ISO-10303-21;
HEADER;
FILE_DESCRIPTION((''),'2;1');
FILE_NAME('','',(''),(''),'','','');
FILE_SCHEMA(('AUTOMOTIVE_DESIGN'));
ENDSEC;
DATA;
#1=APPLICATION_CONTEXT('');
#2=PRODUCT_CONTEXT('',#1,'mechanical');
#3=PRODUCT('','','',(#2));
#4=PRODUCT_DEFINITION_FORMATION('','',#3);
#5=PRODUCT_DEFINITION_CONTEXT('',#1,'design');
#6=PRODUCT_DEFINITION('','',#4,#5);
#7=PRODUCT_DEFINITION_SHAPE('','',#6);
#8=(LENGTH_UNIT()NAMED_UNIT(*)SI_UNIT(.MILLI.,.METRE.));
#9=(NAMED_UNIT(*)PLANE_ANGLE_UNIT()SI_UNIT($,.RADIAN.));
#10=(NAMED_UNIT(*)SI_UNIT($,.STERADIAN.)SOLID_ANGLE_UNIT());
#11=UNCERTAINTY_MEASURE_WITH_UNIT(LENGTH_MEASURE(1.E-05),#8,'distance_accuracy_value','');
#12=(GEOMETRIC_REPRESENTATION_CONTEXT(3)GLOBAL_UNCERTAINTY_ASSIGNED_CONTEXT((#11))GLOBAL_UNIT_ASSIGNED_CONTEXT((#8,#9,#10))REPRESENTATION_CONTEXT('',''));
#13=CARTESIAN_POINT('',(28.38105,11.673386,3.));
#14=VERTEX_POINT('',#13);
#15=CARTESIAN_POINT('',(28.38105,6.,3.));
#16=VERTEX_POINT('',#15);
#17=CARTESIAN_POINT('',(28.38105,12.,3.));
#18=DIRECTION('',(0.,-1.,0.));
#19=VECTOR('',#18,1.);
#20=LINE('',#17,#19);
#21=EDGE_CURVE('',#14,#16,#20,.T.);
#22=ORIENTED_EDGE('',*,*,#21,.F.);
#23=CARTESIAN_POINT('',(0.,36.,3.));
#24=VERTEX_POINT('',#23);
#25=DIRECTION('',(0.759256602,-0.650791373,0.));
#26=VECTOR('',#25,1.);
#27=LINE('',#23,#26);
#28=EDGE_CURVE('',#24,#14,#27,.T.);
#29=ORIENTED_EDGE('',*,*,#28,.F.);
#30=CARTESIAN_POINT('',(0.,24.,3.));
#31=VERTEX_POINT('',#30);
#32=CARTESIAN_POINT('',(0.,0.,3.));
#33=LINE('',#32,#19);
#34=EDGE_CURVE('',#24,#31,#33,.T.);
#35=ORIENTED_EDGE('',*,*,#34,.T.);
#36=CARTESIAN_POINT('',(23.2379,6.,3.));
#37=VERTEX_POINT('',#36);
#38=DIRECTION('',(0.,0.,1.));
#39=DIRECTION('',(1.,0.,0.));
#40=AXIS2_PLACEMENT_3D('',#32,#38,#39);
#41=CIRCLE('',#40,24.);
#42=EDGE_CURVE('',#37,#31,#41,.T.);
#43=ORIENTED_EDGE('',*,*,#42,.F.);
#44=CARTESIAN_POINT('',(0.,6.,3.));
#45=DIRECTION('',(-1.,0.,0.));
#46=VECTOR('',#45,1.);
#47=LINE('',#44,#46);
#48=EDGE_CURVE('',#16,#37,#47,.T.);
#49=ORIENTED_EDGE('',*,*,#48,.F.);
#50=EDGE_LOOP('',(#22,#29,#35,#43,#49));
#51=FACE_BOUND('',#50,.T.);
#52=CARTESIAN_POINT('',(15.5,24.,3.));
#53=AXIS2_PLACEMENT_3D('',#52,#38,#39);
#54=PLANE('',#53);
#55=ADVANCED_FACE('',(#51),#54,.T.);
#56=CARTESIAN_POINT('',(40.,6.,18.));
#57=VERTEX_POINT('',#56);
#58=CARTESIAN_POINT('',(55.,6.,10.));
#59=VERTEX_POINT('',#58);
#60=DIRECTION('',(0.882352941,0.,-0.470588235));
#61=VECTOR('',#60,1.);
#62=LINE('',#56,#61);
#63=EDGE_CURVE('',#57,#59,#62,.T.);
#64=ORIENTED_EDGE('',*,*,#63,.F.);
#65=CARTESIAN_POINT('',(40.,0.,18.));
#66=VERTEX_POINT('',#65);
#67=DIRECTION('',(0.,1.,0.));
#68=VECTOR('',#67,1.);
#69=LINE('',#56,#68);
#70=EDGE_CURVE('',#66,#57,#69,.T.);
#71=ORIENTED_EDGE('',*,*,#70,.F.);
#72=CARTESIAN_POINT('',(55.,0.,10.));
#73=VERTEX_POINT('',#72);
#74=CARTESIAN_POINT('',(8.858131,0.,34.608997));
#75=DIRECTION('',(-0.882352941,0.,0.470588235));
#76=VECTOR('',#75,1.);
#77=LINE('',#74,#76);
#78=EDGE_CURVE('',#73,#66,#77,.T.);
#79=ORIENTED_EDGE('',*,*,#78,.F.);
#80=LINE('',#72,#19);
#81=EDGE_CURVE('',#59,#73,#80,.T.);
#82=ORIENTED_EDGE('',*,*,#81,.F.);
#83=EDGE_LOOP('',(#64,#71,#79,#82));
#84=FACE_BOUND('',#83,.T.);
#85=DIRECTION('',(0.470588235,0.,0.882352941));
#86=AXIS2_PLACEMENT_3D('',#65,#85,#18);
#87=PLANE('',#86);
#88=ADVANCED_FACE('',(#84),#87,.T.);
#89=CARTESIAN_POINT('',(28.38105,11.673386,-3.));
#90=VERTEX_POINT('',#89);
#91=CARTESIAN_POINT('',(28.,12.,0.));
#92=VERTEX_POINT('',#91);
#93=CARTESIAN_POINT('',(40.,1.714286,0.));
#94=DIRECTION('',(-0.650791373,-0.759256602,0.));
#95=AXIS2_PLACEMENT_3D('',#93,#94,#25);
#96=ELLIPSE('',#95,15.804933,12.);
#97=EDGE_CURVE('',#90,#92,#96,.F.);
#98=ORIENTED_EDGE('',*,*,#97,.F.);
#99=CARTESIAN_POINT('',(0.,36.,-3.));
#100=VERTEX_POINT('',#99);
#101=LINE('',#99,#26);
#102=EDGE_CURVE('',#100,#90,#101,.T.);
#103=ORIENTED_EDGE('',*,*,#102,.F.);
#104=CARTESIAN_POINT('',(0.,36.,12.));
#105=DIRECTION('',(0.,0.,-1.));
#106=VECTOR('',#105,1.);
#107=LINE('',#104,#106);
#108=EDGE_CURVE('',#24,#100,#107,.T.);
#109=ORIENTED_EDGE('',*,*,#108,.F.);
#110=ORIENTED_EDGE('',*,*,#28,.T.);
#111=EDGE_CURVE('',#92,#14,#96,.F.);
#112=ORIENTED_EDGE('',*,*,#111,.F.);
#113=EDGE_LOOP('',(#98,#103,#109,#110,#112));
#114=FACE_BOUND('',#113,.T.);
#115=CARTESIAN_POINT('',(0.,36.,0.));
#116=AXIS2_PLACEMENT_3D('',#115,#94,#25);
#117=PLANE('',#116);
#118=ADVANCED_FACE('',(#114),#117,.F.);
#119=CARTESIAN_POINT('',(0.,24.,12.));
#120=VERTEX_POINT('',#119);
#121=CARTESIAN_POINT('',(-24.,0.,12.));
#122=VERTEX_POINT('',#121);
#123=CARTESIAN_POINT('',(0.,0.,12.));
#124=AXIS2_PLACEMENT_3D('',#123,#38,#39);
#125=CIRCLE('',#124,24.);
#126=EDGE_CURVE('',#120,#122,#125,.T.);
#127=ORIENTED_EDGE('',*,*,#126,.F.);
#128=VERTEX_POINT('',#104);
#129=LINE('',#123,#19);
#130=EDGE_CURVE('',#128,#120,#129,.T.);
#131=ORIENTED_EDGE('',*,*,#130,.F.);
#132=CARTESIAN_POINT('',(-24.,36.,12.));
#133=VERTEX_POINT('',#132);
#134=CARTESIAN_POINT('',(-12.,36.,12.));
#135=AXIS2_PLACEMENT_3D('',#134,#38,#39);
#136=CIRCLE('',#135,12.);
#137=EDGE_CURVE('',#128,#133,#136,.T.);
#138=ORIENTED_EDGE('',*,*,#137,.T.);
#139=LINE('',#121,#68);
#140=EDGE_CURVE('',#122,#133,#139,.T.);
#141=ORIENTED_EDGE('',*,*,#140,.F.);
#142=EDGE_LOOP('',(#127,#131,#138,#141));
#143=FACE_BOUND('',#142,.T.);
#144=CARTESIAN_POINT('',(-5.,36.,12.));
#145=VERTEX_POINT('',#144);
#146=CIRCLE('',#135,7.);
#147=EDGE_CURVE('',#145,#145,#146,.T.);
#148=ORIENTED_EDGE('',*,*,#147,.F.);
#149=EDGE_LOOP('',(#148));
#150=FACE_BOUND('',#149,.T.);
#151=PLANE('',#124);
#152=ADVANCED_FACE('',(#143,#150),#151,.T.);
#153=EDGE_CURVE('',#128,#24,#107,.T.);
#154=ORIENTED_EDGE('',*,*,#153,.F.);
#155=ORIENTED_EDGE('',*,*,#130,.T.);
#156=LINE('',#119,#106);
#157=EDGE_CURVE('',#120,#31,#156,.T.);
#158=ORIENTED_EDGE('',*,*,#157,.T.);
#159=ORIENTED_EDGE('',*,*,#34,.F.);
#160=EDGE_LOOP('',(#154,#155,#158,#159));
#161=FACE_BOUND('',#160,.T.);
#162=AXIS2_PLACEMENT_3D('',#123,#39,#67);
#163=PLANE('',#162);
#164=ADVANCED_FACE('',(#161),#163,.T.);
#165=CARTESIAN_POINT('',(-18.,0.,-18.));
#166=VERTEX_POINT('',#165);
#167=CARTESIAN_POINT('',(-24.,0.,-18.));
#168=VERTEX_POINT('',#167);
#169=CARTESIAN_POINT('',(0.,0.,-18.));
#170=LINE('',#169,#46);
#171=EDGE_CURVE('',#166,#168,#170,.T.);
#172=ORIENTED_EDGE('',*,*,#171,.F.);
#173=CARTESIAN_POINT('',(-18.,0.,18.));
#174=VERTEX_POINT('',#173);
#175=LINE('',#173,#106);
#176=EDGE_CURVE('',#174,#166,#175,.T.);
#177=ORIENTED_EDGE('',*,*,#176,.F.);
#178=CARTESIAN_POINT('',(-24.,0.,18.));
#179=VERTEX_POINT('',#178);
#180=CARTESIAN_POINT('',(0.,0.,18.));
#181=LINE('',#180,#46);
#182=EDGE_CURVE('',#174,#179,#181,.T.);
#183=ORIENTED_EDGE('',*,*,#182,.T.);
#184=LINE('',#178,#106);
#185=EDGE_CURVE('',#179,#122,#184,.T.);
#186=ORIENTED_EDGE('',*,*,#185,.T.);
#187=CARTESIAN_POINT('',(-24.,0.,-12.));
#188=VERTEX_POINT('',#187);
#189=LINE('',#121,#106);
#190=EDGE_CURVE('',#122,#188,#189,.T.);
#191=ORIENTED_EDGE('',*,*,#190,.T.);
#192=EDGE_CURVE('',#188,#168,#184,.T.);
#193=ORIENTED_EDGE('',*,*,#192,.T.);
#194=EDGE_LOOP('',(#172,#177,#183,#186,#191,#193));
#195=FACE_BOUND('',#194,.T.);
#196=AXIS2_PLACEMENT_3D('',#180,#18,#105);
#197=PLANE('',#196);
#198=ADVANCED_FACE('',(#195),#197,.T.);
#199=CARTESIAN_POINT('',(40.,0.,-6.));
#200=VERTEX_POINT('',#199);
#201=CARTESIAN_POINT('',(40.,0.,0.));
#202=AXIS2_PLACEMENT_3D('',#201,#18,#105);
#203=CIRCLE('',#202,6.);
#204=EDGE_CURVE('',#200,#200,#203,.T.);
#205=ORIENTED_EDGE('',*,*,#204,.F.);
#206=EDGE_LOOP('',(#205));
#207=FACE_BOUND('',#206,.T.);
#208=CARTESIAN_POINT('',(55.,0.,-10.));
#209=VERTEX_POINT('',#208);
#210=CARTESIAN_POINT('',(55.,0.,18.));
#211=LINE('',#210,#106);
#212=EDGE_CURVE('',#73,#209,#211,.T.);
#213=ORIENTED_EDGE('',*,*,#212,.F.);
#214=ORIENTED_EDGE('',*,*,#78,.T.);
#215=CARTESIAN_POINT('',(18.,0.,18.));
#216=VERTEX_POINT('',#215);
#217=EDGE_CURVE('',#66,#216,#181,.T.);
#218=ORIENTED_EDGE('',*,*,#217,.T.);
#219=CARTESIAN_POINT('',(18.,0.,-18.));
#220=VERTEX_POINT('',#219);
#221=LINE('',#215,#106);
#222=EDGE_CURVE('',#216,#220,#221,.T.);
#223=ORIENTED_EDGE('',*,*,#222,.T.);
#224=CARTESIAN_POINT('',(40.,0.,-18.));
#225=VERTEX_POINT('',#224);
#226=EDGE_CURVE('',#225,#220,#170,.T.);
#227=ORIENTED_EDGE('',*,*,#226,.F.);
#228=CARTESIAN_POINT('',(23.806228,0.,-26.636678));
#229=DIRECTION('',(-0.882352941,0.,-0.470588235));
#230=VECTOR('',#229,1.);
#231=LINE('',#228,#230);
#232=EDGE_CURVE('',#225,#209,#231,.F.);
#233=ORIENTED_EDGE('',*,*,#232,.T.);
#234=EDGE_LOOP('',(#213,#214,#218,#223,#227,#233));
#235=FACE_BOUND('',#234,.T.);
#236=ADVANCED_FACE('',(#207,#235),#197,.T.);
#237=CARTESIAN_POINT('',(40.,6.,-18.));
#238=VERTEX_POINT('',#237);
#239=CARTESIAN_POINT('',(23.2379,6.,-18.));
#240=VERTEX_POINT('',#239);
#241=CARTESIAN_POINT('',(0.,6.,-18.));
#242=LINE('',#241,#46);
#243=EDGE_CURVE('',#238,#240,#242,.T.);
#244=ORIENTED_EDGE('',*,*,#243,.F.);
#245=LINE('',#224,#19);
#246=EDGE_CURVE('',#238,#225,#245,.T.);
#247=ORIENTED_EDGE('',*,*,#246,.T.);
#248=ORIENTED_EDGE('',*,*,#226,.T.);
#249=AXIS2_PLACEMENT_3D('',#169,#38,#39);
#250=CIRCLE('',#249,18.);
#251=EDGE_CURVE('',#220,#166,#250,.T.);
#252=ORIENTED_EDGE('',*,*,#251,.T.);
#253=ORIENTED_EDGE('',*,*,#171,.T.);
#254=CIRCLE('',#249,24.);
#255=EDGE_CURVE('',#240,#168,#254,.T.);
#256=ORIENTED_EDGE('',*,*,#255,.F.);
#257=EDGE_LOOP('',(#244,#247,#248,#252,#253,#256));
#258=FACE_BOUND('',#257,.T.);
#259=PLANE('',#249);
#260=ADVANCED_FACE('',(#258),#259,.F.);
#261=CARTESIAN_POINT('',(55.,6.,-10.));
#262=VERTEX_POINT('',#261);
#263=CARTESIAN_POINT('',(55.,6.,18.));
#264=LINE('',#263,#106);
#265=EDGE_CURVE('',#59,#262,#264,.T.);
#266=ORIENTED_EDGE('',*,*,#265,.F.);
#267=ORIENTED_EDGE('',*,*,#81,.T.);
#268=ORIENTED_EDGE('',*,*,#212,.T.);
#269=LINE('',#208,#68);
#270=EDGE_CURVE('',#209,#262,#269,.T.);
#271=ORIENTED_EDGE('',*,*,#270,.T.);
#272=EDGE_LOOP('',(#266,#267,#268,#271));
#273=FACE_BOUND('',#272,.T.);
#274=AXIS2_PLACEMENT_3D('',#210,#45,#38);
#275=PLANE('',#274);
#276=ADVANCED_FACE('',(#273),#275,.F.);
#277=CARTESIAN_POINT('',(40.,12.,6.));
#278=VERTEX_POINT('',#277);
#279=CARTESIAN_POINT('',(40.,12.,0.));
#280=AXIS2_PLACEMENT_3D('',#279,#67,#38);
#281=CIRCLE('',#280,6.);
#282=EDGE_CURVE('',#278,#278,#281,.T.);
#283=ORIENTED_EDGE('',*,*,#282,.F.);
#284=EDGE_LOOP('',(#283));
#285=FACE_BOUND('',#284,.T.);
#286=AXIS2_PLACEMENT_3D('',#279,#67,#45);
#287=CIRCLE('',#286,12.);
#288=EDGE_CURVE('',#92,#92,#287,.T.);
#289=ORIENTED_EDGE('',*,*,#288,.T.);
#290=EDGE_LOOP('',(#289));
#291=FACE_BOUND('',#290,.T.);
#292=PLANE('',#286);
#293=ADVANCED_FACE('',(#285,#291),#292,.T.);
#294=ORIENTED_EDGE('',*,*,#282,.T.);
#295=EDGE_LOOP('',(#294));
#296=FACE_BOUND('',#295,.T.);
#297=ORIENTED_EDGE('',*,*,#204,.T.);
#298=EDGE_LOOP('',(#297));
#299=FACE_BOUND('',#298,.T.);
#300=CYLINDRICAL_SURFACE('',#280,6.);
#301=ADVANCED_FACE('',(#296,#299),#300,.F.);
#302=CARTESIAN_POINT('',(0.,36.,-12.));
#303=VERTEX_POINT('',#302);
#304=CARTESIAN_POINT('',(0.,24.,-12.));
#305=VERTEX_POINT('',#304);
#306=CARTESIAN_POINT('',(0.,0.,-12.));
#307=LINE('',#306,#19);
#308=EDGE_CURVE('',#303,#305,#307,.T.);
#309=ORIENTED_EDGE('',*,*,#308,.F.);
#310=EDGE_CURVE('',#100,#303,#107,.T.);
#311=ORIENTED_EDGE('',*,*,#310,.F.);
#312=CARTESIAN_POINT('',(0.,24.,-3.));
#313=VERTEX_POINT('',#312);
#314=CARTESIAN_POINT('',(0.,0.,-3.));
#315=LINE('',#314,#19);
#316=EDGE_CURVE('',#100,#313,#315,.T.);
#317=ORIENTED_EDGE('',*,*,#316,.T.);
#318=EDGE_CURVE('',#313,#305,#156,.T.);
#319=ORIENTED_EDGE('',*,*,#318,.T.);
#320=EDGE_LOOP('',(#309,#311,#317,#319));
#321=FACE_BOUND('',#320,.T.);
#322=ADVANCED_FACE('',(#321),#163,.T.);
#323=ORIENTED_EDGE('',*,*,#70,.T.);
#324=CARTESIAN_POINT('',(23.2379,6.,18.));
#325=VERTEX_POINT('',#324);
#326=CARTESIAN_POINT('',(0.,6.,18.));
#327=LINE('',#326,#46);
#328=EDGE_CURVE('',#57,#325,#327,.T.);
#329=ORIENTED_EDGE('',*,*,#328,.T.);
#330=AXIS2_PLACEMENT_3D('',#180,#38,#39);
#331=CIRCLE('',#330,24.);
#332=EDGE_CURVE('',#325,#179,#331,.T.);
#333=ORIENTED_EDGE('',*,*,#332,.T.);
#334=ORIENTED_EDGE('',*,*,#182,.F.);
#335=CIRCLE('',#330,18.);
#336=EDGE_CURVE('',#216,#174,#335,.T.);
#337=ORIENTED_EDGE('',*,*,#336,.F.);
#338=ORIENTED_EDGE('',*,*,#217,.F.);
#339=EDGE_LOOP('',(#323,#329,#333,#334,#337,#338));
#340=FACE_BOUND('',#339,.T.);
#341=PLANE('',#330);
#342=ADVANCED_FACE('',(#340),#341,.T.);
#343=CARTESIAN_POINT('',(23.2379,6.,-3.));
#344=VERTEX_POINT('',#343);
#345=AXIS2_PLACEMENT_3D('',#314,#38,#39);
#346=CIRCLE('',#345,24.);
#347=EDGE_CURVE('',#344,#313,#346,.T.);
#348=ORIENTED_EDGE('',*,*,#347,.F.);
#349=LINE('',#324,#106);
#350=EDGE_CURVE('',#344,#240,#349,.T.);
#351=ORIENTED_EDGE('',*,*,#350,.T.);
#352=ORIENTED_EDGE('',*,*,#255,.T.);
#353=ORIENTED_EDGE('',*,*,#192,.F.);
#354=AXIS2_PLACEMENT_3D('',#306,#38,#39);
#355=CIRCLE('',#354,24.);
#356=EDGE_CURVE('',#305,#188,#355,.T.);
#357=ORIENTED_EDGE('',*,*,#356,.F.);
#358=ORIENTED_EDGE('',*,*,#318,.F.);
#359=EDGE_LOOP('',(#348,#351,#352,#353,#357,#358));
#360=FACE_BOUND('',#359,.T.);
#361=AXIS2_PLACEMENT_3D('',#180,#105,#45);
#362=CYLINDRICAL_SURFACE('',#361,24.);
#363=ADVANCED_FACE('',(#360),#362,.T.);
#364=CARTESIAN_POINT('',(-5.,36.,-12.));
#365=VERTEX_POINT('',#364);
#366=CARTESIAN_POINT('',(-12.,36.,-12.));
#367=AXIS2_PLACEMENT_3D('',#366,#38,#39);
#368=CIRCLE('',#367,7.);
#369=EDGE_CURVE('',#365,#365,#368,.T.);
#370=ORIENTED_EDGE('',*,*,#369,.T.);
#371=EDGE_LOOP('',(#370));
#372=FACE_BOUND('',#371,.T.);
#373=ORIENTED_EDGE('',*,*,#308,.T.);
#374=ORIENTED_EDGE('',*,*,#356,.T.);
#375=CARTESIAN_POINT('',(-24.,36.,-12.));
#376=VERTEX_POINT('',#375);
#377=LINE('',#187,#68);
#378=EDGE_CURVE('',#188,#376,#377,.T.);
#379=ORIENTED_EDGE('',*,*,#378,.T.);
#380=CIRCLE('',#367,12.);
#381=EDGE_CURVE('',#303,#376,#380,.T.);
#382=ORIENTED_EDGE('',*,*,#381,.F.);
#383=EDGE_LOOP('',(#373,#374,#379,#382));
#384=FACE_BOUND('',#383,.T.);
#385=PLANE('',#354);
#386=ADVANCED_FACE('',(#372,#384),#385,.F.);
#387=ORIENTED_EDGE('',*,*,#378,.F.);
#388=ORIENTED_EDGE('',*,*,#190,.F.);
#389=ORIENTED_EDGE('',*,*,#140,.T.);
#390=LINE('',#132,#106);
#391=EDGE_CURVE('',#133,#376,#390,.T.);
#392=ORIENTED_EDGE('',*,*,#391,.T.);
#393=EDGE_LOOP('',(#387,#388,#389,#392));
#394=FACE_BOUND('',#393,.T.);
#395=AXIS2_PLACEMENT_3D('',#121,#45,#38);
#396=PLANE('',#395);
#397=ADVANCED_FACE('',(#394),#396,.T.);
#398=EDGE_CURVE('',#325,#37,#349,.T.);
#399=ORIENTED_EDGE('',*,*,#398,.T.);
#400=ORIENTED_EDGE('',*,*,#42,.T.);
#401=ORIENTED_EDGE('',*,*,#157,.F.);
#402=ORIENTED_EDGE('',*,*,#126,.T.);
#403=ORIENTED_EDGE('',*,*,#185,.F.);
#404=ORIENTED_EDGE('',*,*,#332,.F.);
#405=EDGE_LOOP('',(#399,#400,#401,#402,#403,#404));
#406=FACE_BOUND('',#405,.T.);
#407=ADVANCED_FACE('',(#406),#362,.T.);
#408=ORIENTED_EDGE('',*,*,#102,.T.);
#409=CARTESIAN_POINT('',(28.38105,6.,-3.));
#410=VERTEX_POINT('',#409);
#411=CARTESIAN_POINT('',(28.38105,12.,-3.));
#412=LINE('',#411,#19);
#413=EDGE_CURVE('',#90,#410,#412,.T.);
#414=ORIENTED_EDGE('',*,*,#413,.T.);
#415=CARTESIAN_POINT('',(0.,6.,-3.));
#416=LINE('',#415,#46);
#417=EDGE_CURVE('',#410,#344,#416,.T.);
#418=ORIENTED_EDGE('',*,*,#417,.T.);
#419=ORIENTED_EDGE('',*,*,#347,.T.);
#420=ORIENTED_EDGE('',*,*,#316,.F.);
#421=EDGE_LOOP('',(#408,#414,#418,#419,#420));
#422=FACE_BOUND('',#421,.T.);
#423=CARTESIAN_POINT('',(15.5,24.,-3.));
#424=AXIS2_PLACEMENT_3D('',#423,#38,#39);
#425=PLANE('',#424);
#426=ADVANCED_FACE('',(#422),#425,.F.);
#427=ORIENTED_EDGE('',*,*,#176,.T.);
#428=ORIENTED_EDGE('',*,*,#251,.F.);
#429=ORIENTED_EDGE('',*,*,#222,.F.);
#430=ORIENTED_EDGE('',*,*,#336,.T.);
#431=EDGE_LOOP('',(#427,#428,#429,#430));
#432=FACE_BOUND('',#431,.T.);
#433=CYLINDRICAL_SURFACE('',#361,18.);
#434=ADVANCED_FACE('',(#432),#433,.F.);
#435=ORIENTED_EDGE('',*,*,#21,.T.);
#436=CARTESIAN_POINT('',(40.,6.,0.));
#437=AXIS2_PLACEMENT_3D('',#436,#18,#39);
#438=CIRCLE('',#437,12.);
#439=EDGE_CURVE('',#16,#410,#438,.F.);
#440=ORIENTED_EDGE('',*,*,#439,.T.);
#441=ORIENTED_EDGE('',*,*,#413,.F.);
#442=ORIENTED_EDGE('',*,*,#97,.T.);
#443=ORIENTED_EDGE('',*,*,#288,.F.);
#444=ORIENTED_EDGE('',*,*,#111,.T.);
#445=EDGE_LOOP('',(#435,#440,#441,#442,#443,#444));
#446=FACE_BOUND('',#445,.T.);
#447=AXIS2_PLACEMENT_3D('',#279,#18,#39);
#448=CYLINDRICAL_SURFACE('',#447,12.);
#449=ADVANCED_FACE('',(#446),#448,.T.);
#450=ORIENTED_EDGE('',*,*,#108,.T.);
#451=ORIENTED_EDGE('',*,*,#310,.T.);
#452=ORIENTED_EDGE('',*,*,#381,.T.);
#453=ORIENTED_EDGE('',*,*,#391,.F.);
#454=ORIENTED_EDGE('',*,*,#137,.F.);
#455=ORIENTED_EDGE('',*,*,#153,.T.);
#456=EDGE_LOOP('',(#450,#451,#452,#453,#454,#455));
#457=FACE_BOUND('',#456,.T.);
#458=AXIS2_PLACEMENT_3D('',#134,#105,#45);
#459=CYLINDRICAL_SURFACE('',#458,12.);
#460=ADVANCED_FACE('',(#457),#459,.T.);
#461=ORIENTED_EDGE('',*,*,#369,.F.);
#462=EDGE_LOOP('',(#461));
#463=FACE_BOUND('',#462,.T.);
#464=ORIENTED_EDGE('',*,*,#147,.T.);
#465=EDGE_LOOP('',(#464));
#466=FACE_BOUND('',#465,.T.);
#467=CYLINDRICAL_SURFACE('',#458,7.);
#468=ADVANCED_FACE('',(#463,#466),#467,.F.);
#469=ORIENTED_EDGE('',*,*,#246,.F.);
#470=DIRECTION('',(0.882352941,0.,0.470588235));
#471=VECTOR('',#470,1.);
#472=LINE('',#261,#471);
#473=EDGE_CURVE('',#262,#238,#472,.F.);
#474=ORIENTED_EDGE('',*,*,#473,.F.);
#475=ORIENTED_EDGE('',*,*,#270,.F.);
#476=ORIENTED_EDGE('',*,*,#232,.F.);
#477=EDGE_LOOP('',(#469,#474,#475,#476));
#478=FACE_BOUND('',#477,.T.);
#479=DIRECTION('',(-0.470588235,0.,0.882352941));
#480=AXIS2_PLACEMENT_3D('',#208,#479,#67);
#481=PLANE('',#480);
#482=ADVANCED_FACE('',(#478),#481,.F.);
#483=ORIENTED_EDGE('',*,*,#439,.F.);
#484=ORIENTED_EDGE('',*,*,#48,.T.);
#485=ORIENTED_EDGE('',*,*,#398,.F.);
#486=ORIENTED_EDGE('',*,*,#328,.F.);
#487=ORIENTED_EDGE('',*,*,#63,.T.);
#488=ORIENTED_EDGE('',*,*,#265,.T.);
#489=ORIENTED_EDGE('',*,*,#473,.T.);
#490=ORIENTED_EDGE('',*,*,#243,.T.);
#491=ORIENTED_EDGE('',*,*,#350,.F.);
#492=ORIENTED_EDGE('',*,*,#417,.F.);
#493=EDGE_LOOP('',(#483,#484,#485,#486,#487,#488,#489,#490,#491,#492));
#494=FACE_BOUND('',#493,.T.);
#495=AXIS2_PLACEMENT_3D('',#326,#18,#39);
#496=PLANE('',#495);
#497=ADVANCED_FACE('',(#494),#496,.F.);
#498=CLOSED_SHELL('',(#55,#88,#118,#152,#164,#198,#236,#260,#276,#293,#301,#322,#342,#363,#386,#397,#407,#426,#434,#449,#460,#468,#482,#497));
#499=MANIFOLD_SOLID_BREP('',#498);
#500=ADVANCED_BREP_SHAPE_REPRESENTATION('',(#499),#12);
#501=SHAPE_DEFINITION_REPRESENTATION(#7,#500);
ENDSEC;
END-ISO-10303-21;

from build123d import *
from build123d.topology import SkipClean

# Parameters (mm, degrees)
BOSS_EXTRUDE1_DEPTH        = 18
SKETCH1_3_R                = 12
SKETCH1_3_R_2              = 7
BOSS_EXTRUDE2_DEPTH        = 12
SKETCH2_R                  = 12
BOSS_EXTRUDE3_DEPTH        = 6
RIB1_REACH                 = 77.186
SKETCH3_WALL_W             = 189.251047722
SKETCH3_WALL_H             = 6
CHAMFER1_SIZE              = 8
CHAMFER1_SIZE2             = 15
CHAMFER2_SIZE              = 15
CHAMFER2_SIZE2             = 8
F_12_0MM_DOWEL_HOLE1_D     = 12
F_12_0MM_DOWEL_HOLE1_DEPTH = 30
F_12_0MM_DOWEL_HOLE1_TIP   = 3.605163714


with BuildPart() as part:
    # Sketch1 → Boss-Extrude1 (new, symmetric)
    with BuildSketch(Plane.XY):
        with BuildLine():
            ThreePointArc((18, 0), (0, 18), (-18, 0))
            Line((-18, 0), (-24, 0))
            ThreePointArc((-24, 0), (-3.02410302, 23.80871271), (23.237900077, 6))
            Line((23.237900077, 6), (55, 6))
            Line((55, 6), (55, 0))
            Line((55, 0), (24, 0))
            Line((24, 0), (18, 0))
        make_face()
    extrude(amount=BOSS_EXTRUDE1_DEPTH, both=True)

    # Sketch1<3> → Boss-Extrude2 (add, symmetric)
    # profile 1 of 2: a face of its own
    with BuildSketch(Plane.XY):
        with BuildLine():
            Line((-24, 36), (-24, 0))
            ThreePointArc((-24, 0), (-16.970562748, 16.970562748), (0, 24))
            Line((0, 24), (0, 36))
            ThreePointArc((0, 36), (-12, 24), (-24, 36))
        make_face()
    # profile 2 of 2: a face of its own
    with BuildSketch(Plane.XY):
        with Locations((-12, 36)):
            Circle(SKETCH1_3_R)
        with Locations((-12, 36)):
            Circle(SKETCH1_3_R_2, mode=Mode.SUBTRACT)
    extrude(amount=BOSS_EXTRUDE2_DEPTH, both=True)

    # Sketch2 → Boss-Extrude3 (add)
    with SkipClean():  # the faces are left unmerged after this step: merging them gives an invalid solid
        with BuildSketch(Plane(origin=(0, 6, 0), x_dir=(1, 0, 0), z_dir=(0, 1, 0))):
            with Locations((40, 0)):
                Circle(SKETCH2_R)
        extrude(amount=BOSS_EXTRUDE3_DEPTH)
    add(part.part.scale(1), mode=Mode.REPLACE)  # the faces are merged on a copy

    # Sketch3 wall → Rib1 (add, up to next)
    with BuildSketch(Plane(origin=(14, 24, 0), x_dir=(0.759256602365, -0.650791373456, 0), z_dir=(0.650791373456, 0.759256602365, 0)), mode=Mode.PRIVATE) as rib1_sk1:
        Rectangle(SKETCH3_WALL_W, SKETCH3_WALL_H)
    rib1_tool1 = extrude(rib1_sk1.sketch, amount=-RIB1_REACH, mode=Mode.PRIVATE) - part.part
    add(rib1_tool1.solids().sort_by_distance((14, 24, 0))[0])

    # Chamfer1
    chamfer1_edges = [part.edges().sort_by_distance(p)[0] for p in [
        (55, 3, 18),
    ]]
    chamfer1_side = [part.faces().sort_by_distance(p)[0] for p in [
        (55, 3, 0),
    ]]
    chamfer(chamfer1_edges, length=CHAMFER1_SIZE, length2=CHAMFER1_SIZE2, reference=chamfer1_side[0])

    # Chamfer2
    chamfer2_edges = [part.edges().sort_by_distance(p)[0] for p in [
        (55, 3, -18),
    ]]
    chamfer2_side = [part.faces().sort_by_distance(p)[0] for p in [
        (39.118950039, 5.174348742, -18),
    ]]
    chamfer(chamfer2_edges, length=CHAMFER2_SIZE, length2=CHAMFER2_SIZE2, reference=chamfer2_side[0])

    # Ø12.0mm Dowel Hole1
    with Locations(Plane(origin=(40, 12, 0), x_dir=(1, 0, 0), z_dir=(0, 1, 0))):
        with Locations((0, 0)):
            Hole(F_12_0MM_DOWEL_HOLE1_D / 2, depth=F_12_0MM_DOWEL_HOLE1_DEPTH)
            with Locations((0, 0, -(F_12_0MM_DOWEL_HOLE1_DEPTH + F_12_0MM_DOWEL_HOLE1_TIP / 2))):  # 118° drill point
                Cone(0, F_12_0MM_DOWEL_HOLE1_D / 2, F_12_0MM_DOWEL_HOLE1_TIP, mode=Mode.SUBTRACT)


solid = part.part
